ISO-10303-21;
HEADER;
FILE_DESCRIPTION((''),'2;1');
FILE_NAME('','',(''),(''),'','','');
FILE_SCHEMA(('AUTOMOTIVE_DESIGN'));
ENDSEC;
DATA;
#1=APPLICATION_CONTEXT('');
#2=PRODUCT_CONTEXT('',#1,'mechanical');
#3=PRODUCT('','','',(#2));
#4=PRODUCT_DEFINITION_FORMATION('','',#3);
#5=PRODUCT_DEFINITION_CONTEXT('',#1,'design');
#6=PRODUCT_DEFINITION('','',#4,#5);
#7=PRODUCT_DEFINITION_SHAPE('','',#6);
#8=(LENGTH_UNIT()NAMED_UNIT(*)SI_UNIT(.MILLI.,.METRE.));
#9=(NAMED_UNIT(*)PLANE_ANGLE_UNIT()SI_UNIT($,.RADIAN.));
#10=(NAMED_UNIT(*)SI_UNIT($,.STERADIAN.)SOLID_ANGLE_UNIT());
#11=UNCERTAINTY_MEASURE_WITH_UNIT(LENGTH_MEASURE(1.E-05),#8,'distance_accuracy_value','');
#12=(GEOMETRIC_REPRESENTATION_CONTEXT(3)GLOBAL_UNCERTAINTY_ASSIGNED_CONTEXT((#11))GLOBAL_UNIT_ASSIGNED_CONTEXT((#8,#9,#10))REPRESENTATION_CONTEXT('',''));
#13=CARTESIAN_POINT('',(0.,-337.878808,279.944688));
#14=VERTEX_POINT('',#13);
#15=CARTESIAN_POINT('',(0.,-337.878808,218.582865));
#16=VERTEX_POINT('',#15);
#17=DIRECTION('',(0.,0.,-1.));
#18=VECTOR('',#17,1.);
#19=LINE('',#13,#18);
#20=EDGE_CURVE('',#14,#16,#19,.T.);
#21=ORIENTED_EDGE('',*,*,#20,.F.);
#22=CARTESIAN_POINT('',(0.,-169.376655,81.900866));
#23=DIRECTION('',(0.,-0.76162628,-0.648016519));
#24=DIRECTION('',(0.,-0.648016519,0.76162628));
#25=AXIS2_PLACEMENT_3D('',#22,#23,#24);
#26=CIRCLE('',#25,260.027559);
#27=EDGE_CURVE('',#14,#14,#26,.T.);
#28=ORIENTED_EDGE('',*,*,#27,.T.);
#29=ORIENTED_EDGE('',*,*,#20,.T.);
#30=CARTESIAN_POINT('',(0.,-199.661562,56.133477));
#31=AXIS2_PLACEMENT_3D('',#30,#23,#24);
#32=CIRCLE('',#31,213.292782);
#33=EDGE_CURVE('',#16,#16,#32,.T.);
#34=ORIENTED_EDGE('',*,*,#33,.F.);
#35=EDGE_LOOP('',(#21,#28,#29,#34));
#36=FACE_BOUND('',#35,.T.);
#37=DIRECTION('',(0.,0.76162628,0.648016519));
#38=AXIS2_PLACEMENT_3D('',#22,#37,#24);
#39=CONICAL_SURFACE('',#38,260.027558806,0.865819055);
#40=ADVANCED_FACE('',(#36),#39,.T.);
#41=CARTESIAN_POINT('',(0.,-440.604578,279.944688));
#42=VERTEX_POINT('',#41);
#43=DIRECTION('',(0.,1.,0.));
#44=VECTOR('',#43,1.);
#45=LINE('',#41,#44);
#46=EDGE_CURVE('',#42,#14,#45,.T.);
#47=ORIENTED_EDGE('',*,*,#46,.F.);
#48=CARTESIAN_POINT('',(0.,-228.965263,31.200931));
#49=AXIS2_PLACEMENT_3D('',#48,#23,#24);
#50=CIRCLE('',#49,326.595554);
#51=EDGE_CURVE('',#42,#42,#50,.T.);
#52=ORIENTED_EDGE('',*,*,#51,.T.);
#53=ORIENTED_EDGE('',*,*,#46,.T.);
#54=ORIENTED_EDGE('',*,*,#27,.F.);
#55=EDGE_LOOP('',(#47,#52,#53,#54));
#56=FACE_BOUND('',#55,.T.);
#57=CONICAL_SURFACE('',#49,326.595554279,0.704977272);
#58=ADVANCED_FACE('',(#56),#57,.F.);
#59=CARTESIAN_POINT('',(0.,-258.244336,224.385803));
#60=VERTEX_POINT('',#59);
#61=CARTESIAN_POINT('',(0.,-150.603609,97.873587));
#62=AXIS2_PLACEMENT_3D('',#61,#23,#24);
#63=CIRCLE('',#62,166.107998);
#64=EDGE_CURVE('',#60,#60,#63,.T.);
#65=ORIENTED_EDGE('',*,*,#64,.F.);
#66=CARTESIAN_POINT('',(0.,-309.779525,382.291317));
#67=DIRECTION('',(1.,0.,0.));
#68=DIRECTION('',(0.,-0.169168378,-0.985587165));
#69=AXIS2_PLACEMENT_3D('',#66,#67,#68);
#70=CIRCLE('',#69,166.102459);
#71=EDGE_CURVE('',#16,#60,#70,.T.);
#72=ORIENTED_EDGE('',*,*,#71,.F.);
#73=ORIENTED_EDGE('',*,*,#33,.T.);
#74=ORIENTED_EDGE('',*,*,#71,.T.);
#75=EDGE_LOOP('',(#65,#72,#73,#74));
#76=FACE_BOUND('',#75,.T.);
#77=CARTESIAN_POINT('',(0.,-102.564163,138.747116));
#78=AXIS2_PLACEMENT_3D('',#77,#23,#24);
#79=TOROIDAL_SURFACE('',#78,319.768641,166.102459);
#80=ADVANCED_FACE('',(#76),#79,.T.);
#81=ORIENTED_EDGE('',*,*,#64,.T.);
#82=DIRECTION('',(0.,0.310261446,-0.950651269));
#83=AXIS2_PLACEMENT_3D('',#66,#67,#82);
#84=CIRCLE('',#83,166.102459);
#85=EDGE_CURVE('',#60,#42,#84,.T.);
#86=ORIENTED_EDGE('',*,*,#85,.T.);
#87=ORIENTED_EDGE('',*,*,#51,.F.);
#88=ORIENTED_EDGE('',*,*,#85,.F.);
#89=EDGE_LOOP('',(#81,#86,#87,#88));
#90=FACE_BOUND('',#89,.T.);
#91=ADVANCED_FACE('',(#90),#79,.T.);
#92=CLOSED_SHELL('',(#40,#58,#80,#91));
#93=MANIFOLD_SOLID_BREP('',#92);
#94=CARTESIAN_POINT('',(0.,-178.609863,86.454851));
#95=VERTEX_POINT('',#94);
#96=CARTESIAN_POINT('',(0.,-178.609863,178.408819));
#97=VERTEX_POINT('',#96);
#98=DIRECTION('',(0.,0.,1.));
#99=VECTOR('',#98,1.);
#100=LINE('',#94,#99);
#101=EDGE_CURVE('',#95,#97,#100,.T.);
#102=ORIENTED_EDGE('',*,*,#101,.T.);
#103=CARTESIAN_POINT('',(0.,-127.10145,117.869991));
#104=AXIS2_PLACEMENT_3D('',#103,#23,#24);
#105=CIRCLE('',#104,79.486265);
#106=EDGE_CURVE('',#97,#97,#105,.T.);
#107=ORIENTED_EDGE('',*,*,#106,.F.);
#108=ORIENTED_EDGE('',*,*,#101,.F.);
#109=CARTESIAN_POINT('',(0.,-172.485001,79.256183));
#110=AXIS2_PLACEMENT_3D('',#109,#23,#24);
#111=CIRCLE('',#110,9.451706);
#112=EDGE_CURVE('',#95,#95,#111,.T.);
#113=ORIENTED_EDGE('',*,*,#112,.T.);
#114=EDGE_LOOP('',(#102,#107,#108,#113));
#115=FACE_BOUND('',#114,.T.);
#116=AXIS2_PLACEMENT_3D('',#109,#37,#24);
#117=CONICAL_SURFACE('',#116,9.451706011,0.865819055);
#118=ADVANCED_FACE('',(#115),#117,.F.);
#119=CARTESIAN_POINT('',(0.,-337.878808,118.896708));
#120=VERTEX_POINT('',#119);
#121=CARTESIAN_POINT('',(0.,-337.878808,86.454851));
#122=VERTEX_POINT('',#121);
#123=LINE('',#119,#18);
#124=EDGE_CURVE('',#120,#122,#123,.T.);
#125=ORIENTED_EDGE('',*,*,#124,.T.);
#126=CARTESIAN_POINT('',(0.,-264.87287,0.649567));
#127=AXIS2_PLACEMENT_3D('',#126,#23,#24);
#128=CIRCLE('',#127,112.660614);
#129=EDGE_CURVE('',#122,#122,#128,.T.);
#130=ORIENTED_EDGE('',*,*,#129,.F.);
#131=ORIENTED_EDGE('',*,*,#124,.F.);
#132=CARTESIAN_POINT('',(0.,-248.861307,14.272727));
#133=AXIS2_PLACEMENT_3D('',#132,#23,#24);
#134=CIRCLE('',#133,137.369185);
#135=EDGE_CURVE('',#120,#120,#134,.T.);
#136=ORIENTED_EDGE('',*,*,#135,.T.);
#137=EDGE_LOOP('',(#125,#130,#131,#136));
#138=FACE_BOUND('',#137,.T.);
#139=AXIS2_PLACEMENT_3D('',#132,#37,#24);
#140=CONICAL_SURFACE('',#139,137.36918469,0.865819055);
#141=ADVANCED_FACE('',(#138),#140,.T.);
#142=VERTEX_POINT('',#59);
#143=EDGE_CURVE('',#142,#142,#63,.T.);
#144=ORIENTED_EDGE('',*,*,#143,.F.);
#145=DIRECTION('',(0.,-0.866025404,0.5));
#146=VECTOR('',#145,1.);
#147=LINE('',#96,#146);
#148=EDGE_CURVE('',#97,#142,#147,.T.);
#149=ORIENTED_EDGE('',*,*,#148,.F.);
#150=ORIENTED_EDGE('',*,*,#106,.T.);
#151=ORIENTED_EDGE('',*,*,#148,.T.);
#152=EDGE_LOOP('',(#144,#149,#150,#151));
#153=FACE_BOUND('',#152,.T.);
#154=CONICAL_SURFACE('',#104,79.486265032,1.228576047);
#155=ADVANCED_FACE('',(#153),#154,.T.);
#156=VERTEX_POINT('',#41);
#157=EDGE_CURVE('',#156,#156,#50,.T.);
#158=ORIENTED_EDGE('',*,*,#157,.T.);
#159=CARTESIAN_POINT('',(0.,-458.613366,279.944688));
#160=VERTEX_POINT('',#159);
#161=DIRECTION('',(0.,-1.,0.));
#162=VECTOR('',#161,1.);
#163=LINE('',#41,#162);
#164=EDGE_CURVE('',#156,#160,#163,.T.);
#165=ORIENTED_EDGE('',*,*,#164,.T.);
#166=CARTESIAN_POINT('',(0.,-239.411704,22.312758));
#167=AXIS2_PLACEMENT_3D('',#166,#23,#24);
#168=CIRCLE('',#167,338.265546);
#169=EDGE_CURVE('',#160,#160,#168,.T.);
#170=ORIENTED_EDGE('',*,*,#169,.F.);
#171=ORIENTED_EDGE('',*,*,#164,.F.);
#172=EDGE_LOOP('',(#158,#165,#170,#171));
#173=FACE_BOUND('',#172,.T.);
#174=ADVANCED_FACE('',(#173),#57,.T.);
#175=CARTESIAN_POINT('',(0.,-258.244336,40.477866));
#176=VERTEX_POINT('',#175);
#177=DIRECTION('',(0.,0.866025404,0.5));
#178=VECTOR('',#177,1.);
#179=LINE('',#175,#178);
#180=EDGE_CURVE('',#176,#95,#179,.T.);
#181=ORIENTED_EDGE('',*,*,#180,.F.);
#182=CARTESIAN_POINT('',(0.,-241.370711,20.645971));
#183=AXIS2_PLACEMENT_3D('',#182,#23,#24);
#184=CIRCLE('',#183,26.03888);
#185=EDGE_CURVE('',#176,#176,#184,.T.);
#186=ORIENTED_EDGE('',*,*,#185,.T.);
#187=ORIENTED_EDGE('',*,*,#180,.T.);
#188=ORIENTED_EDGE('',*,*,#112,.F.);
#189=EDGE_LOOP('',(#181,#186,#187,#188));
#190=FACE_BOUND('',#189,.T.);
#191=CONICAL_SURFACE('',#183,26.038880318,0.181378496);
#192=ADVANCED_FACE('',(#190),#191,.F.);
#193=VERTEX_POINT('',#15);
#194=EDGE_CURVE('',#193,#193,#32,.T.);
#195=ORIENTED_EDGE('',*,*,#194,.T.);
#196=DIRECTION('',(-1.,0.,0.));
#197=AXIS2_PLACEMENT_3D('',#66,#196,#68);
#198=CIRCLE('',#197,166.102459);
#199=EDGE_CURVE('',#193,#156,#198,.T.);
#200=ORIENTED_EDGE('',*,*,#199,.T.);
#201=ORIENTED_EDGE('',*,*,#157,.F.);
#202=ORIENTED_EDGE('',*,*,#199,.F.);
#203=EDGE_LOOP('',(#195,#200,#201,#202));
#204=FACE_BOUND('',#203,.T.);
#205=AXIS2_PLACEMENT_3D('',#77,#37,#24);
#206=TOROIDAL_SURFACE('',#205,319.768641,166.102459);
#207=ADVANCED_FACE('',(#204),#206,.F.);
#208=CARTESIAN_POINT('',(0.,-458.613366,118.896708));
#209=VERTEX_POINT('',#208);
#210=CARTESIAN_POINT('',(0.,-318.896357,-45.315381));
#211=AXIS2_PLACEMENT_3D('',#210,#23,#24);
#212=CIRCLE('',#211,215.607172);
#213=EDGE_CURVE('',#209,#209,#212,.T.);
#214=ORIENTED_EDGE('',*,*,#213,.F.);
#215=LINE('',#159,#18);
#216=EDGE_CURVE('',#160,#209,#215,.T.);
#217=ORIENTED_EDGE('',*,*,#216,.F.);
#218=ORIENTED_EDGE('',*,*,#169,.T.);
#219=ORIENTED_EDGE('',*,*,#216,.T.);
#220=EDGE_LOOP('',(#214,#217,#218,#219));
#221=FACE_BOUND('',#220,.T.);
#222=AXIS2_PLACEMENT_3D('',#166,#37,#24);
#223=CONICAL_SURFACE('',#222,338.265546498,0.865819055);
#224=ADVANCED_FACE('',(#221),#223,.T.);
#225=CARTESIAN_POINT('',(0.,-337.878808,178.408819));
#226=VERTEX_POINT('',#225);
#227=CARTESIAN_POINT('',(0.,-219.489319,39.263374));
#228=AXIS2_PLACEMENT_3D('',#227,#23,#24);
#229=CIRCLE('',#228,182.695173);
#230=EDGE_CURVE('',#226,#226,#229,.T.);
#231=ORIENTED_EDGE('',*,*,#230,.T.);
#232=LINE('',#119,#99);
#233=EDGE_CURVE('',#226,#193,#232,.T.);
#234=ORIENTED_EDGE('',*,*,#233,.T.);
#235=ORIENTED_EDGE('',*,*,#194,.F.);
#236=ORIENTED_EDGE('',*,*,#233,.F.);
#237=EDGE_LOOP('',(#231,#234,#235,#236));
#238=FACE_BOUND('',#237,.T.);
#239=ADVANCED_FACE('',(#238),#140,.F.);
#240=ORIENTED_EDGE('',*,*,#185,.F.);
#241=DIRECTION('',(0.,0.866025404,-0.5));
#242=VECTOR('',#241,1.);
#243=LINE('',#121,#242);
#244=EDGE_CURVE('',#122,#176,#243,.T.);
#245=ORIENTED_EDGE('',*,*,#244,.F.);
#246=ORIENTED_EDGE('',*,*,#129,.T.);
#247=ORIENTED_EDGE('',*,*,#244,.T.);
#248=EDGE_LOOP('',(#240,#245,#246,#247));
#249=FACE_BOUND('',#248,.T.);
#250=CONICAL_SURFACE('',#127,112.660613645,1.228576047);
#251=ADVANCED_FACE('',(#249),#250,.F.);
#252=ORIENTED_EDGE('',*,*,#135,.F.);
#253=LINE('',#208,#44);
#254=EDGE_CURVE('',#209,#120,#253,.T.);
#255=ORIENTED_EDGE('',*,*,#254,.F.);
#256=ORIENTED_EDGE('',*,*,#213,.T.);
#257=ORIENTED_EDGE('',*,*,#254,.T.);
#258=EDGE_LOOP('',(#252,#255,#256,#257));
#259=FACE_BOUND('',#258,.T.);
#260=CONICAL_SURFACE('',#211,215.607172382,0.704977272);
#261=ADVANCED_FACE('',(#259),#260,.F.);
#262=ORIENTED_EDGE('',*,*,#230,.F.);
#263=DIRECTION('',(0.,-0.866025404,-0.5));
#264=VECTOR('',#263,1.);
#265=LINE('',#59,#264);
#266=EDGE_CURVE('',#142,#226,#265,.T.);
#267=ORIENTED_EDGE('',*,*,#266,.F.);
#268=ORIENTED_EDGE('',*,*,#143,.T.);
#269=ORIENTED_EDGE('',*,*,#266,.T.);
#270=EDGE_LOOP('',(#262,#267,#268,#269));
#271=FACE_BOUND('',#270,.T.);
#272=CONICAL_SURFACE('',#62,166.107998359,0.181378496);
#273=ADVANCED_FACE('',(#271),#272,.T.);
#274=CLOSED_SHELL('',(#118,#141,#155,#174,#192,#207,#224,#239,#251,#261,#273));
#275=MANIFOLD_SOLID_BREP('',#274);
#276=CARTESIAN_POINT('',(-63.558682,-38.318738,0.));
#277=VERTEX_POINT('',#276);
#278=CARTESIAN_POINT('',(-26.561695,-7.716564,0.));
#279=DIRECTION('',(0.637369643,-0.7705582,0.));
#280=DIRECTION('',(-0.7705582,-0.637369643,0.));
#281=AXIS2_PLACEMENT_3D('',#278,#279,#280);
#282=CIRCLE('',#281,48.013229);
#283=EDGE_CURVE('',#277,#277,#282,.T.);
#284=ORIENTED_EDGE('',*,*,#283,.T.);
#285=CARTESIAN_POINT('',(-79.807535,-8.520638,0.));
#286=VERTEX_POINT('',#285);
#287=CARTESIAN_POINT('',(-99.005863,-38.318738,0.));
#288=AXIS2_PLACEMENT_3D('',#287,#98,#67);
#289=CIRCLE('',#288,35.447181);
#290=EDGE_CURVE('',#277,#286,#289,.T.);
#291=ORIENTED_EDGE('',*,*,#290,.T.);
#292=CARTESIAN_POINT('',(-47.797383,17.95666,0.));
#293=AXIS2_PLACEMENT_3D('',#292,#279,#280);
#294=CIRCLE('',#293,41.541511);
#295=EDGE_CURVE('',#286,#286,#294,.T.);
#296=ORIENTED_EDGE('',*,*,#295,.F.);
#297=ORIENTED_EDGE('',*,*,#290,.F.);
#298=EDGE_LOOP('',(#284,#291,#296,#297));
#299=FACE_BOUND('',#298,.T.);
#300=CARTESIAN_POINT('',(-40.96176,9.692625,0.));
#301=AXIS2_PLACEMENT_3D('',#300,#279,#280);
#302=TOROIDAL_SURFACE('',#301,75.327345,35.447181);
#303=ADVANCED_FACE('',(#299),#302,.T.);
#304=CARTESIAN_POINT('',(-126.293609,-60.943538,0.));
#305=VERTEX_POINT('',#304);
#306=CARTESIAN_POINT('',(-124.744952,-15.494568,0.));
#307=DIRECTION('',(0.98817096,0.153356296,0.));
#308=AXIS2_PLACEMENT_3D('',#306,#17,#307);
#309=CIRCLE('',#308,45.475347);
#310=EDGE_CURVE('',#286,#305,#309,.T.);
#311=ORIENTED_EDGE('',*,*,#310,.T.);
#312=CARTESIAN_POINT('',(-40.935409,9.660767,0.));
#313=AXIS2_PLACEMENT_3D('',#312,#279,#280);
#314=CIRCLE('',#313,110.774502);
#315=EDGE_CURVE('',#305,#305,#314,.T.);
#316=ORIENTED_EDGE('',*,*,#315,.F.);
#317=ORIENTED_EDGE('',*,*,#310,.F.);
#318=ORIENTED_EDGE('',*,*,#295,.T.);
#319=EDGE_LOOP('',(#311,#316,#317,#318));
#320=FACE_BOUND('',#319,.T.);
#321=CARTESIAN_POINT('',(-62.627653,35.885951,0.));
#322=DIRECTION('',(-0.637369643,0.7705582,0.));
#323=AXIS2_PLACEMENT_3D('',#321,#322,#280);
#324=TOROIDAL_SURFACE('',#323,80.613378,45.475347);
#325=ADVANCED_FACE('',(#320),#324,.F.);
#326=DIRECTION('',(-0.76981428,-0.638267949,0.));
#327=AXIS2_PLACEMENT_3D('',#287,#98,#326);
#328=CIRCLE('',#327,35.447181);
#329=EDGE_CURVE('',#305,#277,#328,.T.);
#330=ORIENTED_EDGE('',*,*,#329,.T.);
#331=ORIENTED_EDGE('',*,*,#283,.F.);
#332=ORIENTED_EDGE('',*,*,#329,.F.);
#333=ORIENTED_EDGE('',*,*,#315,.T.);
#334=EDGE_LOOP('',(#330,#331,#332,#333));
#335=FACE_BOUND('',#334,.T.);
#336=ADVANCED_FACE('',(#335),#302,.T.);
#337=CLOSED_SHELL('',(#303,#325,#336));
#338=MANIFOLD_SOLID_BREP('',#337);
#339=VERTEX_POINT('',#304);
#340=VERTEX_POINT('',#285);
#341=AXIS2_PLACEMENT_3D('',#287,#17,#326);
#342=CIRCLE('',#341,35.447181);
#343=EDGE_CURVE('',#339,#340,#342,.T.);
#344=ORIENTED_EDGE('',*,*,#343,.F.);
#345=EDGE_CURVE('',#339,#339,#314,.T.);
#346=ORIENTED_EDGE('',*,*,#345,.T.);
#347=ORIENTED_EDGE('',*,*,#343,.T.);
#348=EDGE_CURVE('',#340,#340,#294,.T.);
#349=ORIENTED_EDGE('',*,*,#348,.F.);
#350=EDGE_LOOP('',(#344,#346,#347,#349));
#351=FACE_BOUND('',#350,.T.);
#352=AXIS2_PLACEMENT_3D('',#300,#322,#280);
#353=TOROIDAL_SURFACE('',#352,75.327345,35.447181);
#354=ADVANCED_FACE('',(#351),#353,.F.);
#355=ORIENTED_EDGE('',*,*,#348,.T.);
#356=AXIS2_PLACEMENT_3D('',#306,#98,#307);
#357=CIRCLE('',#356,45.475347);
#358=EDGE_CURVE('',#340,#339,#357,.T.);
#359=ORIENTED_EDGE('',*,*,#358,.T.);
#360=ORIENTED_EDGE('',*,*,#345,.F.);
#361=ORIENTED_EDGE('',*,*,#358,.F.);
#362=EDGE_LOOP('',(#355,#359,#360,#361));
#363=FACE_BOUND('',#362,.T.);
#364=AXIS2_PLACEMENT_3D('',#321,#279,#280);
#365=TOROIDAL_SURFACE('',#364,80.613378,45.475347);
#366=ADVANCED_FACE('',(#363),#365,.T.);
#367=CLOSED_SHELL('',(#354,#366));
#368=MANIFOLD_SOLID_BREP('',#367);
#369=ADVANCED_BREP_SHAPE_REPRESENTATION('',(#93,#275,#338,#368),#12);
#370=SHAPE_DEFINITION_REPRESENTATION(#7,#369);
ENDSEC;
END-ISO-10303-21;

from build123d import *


# Not quite as in the source:
# - a feature names something its author has since deleted; it is built from what else it names


with BuildPart() as f1:
    # F0 (on Top) → F1 (revolve)
    with BuildSketch(Plane.XY):
        with BuildLine():
            ThreePointArc((-126.2936090108, -60.9435376982), (-125.5275482396, -14.8005998046), (-79.8075346727, -8.5206375433))
            ThreePointArc((-79.8075346727, -8.5206375433), (-158.7697402428, 14.6769568368), (-126.2936090108, -60.9435376982))
        make_face()
    revolve(axis=Axis((-29.3286815286, -4.3713711202, 0), (0.6373696425, -0.7705581995, 0)))


with BuildPart() as f1b:
    # F0 (on Top) → F1, piece 2 (revolve)
    with BuildSketch(Plane.XY):
        with BuildLine():
            ThreePointArc((-79.8075346727, -8.5206375433), (-79.4042868466, -11.9972450764), (-79.2696049846, -15.4945682734))
            ThreePointArc((-79.2696049846, -15.4945682734), (-93.1413013496, -48.1934435463), (-126.2936090108, -60.9435376982))
            ThreePointArc((-126.2936090108, -60.9435376982), (-86.9802869652, -71.6637251276), (-63.5586823019, -38.3187383413))
            ThreePointArc((-63.5586823019, -38.3187383413), (-67.8848955276, -21.3485290428), (-79.8075346727, -8.5206375433))
        make_face()
    revolve(axis=Axis((-29.3286815286, -4.3713711202, 0), (0.6373696425, -0.7705581995, 0)))


with BuildPart() as f3:
    # F2 (on Right) → F3 (revolve)
    with BuildSketch(Plane.YZ):
        with BuildLine():
            ThreePointArc((-337.8788083792, 218.5828652107), (-297.7077005564, 216.6281105112), (-258.2443356514, 224.3858034685))
            ThreePointArc((-258.2443356514, 224.3858034685), (-175.3359519396, 284.7466982936), (-143.6770656998, 382.2913169861))
            ThreePointArc((-143.6770656998, 382.2913169861), (-363.9074469759, 539.3269656823), (-440.6045777253, 279.9446880817))
            Line((-440.6045777253, 279.9446880817), (-337.8788083792, 279.9446880817))
            Line((-337.8788083792, 279.9446880817), (-337.8788083792, 218.5828652107))
        make_face()
    revolve(axis=Axis((0, -155.7009387761, 93.5366116464), (0, -0.7616262804, -0.6480165191)))


with BuildPart() as f3b:
    # F2 (on Right) → F3, piece 2 (revolve)
    with BuildSketch(Plane.YZ):
        with BuildLine():
            Line((-337.8788083792, 118.8967078924), (-337.8788083792, 178.4088192023))
            Line((-337.8788083792, 178.4088192023), (-337.8788083792, 218.5828652107))
            ThreePointArc((-337.8788083792, 218.5828652107), (-394.9590675899, 239.6923253669), (-440.6045777253, 279.9446880817))
            Line((-440.6045777253, 279.9446880817), (-458.6133658886, 279.9446880817))
            Line((-458.6133658886, 279.9446880817), (-458.6133658886, 118.8967078924))
            Line((-458.6133658886, 118.8967078924), (-337.8788083792, 118.8967078924))
        make_face()
        Polygon((-178.6098629236, 86.45485067), (-178.6098629236, 178.4088192023), (-258.2443356514, 224.3858034685), (-337.8788083792, 178.4088192023), (-337.8788083792, 118.8967078924), (-337.8788083792, 86.45485067), (-258.2443356514, 40.4778664038), align=None)
    revolve(axis=Axis((0, -155.7009387761, 93.5366116464), (0, -0.7616262804, -0.6480165191)))


solid = Compound([f1.part, f1b.part, f3.part, f3b.part])
